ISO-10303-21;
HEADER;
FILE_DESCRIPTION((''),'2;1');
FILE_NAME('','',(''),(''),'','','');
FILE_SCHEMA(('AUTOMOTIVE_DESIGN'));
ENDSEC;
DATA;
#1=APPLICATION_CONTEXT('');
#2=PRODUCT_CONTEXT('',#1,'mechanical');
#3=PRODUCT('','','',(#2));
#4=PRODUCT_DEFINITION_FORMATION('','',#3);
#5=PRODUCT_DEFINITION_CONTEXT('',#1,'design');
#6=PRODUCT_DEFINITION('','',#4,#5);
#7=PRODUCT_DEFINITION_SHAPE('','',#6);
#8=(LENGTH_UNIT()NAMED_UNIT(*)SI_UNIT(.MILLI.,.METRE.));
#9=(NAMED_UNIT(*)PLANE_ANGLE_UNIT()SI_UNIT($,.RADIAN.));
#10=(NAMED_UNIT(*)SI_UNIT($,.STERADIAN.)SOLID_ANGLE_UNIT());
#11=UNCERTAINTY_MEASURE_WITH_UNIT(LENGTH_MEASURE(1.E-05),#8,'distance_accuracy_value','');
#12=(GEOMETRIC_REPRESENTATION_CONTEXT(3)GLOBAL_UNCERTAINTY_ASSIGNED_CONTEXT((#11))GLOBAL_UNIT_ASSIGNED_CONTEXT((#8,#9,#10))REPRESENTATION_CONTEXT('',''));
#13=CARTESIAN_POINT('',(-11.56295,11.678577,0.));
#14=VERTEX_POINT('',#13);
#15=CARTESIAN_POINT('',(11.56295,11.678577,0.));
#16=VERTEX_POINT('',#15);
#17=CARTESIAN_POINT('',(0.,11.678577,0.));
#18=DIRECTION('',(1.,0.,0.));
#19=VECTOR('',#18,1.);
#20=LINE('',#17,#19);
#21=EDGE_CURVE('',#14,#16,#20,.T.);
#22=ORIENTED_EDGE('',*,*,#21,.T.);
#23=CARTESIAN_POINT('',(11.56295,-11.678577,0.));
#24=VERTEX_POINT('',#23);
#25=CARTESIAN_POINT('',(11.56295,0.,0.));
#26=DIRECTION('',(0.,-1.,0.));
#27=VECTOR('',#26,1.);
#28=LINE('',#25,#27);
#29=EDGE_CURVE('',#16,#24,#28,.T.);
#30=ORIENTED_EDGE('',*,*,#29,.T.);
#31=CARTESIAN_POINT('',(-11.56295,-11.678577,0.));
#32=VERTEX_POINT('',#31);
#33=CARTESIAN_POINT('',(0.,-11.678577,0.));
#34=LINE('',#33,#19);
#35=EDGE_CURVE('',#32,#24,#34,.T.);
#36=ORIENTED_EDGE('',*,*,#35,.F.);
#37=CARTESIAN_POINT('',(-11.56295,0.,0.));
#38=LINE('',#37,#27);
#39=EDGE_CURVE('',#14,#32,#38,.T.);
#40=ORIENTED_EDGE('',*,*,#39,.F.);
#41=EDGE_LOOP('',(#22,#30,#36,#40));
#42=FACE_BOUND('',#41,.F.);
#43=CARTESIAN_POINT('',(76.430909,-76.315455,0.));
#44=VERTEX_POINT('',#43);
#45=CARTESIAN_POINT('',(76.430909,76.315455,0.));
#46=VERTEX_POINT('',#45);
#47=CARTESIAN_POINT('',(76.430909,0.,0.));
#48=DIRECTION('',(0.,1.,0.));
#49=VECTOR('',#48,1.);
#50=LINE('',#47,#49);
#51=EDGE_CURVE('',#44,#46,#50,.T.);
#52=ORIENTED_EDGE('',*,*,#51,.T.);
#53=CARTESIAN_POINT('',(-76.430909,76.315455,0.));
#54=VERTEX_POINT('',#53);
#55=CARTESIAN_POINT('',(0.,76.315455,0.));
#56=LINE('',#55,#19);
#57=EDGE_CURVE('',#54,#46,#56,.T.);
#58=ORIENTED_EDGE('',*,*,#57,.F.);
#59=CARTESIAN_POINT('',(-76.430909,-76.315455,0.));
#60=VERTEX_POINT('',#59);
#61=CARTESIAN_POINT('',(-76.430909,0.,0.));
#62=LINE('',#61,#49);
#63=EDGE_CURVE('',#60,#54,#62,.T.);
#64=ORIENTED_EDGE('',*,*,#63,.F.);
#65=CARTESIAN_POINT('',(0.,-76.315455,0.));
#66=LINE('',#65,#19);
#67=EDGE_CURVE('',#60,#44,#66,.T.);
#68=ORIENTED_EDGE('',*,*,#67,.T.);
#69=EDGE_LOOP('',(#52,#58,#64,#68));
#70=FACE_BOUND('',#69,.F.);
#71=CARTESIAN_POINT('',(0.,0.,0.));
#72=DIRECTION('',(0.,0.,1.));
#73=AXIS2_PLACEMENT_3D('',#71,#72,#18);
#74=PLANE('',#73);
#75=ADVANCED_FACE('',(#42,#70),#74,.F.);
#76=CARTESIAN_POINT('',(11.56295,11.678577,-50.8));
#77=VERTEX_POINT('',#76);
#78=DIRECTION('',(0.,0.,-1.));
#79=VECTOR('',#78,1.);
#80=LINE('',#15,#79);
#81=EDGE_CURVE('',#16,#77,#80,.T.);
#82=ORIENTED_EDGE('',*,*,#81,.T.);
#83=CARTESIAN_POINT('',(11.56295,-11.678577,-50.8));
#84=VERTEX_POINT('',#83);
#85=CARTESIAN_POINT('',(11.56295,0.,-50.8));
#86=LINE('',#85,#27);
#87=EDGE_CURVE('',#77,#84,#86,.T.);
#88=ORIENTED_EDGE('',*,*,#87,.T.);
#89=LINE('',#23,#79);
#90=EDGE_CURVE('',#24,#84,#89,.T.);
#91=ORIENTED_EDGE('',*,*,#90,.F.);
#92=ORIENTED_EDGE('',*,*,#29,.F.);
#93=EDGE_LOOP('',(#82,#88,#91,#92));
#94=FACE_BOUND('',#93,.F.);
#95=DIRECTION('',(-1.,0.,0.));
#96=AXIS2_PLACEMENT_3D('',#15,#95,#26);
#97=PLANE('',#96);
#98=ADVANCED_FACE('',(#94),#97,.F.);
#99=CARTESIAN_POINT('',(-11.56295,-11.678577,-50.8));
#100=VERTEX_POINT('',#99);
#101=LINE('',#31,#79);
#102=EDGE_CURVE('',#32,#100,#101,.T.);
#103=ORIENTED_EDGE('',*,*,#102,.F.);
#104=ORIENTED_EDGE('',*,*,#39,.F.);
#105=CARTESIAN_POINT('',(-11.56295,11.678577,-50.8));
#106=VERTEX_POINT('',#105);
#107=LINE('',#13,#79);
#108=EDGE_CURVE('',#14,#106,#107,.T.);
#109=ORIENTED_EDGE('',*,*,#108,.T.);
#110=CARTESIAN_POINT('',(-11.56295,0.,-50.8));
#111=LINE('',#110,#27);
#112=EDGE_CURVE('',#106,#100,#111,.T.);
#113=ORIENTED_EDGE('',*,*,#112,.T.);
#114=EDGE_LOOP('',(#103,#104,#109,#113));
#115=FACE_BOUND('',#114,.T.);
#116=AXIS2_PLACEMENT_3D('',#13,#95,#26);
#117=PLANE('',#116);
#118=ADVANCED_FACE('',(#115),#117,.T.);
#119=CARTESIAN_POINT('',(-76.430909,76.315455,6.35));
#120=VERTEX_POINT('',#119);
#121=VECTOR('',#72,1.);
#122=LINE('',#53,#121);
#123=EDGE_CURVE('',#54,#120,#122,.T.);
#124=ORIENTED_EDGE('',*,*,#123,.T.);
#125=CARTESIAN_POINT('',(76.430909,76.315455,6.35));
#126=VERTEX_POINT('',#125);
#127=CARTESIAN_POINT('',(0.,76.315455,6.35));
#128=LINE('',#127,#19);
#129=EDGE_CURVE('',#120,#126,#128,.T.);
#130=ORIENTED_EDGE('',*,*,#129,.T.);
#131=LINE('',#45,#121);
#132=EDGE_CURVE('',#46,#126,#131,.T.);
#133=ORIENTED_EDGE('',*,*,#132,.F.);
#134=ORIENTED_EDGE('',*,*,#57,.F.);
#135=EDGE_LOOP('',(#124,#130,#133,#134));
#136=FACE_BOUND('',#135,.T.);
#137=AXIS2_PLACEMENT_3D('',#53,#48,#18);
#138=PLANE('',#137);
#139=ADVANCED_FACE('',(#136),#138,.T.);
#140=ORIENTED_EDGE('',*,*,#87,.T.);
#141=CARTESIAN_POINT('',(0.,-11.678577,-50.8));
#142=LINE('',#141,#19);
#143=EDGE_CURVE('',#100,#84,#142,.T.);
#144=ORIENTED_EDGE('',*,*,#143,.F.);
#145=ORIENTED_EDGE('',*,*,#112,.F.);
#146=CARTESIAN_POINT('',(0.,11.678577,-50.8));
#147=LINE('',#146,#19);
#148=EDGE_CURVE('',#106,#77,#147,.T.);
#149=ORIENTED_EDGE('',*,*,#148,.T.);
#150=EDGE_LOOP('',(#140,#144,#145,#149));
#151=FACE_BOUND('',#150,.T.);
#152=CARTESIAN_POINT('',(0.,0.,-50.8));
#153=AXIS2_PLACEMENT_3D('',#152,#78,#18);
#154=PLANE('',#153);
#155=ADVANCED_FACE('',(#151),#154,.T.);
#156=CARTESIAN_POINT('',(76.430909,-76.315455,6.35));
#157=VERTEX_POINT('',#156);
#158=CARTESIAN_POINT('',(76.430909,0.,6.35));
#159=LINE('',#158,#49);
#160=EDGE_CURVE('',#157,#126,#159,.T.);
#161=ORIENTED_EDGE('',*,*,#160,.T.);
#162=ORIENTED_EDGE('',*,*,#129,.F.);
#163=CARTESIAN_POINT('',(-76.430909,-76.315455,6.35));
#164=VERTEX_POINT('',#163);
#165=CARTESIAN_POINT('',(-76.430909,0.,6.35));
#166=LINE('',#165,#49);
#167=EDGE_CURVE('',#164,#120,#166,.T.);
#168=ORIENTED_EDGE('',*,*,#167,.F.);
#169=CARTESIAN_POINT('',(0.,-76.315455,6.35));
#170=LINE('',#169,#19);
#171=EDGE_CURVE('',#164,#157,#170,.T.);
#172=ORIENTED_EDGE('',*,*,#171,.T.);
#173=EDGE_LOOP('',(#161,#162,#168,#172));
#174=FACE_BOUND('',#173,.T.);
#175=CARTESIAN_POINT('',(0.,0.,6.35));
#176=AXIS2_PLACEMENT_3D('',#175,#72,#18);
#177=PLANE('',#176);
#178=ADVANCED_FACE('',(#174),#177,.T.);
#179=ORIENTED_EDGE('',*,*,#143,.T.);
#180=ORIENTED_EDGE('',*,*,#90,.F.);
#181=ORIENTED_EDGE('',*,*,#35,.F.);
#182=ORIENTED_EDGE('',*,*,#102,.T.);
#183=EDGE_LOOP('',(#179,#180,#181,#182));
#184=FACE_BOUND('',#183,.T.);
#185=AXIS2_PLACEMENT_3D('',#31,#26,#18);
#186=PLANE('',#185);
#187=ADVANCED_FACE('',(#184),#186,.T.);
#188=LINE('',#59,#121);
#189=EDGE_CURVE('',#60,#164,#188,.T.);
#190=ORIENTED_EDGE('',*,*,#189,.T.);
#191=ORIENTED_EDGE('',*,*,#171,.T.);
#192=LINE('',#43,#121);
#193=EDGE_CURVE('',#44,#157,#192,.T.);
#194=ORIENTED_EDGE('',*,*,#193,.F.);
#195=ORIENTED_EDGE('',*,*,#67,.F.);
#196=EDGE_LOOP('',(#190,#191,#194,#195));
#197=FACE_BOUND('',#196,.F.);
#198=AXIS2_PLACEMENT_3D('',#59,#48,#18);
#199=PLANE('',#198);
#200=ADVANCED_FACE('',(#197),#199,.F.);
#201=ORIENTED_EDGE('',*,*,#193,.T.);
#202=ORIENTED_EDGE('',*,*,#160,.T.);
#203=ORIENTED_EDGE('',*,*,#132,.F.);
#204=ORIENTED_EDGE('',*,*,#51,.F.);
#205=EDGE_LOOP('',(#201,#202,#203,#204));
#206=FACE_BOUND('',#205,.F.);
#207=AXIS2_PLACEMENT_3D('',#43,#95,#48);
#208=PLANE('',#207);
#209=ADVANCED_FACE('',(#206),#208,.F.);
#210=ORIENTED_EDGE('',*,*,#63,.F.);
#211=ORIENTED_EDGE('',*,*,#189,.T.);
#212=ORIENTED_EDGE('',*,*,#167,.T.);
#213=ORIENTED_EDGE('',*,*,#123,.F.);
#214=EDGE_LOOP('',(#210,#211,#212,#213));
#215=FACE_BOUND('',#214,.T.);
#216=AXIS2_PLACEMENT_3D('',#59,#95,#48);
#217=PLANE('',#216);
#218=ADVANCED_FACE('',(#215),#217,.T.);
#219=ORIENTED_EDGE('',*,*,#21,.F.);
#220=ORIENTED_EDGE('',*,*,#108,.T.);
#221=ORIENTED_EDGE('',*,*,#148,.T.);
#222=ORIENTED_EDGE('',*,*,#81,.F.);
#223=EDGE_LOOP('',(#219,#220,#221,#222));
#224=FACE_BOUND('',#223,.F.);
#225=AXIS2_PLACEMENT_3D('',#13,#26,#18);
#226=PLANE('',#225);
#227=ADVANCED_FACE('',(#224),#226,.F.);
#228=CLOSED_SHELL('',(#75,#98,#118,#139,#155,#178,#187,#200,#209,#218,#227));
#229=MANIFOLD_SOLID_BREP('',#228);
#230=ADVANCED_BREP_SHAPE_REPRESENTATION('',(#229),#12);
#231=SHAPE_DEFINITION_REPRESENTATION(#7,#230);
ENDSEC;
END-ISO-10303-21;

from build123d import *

# Parameters (mm, degrees)
F0_W     = 152.8618186712
F0_H     = 152.6309102774
F1_DEPTH = 6.35
F4_W     = 23.1258999556
F4_H     = 23.3571548015
F5_DEPTH = 50.8


# Not quite as in the source:
# - the program builds the solid bodies; features that only make, move or delete a surface that nothing else refers to are left out


with BuildPart() as f1:
    # F0 (on Top) → F1 (new body)
    with BuildSketch(Plane.XY):
        Rectangle(F0_W, F0_H)
    extrude(amount=F1_DEPTH)

    # F4 (on face) → F5 (join)
    with BuildSketch(Plane(origin=(0, 0, 0), x_dir=(1, 0, 0), z_dir=(0, 0, -1))):
        Rectangle(F4_W, F4_H)
    extrude(amount=F5_DEPTH)


solid = f1.part
